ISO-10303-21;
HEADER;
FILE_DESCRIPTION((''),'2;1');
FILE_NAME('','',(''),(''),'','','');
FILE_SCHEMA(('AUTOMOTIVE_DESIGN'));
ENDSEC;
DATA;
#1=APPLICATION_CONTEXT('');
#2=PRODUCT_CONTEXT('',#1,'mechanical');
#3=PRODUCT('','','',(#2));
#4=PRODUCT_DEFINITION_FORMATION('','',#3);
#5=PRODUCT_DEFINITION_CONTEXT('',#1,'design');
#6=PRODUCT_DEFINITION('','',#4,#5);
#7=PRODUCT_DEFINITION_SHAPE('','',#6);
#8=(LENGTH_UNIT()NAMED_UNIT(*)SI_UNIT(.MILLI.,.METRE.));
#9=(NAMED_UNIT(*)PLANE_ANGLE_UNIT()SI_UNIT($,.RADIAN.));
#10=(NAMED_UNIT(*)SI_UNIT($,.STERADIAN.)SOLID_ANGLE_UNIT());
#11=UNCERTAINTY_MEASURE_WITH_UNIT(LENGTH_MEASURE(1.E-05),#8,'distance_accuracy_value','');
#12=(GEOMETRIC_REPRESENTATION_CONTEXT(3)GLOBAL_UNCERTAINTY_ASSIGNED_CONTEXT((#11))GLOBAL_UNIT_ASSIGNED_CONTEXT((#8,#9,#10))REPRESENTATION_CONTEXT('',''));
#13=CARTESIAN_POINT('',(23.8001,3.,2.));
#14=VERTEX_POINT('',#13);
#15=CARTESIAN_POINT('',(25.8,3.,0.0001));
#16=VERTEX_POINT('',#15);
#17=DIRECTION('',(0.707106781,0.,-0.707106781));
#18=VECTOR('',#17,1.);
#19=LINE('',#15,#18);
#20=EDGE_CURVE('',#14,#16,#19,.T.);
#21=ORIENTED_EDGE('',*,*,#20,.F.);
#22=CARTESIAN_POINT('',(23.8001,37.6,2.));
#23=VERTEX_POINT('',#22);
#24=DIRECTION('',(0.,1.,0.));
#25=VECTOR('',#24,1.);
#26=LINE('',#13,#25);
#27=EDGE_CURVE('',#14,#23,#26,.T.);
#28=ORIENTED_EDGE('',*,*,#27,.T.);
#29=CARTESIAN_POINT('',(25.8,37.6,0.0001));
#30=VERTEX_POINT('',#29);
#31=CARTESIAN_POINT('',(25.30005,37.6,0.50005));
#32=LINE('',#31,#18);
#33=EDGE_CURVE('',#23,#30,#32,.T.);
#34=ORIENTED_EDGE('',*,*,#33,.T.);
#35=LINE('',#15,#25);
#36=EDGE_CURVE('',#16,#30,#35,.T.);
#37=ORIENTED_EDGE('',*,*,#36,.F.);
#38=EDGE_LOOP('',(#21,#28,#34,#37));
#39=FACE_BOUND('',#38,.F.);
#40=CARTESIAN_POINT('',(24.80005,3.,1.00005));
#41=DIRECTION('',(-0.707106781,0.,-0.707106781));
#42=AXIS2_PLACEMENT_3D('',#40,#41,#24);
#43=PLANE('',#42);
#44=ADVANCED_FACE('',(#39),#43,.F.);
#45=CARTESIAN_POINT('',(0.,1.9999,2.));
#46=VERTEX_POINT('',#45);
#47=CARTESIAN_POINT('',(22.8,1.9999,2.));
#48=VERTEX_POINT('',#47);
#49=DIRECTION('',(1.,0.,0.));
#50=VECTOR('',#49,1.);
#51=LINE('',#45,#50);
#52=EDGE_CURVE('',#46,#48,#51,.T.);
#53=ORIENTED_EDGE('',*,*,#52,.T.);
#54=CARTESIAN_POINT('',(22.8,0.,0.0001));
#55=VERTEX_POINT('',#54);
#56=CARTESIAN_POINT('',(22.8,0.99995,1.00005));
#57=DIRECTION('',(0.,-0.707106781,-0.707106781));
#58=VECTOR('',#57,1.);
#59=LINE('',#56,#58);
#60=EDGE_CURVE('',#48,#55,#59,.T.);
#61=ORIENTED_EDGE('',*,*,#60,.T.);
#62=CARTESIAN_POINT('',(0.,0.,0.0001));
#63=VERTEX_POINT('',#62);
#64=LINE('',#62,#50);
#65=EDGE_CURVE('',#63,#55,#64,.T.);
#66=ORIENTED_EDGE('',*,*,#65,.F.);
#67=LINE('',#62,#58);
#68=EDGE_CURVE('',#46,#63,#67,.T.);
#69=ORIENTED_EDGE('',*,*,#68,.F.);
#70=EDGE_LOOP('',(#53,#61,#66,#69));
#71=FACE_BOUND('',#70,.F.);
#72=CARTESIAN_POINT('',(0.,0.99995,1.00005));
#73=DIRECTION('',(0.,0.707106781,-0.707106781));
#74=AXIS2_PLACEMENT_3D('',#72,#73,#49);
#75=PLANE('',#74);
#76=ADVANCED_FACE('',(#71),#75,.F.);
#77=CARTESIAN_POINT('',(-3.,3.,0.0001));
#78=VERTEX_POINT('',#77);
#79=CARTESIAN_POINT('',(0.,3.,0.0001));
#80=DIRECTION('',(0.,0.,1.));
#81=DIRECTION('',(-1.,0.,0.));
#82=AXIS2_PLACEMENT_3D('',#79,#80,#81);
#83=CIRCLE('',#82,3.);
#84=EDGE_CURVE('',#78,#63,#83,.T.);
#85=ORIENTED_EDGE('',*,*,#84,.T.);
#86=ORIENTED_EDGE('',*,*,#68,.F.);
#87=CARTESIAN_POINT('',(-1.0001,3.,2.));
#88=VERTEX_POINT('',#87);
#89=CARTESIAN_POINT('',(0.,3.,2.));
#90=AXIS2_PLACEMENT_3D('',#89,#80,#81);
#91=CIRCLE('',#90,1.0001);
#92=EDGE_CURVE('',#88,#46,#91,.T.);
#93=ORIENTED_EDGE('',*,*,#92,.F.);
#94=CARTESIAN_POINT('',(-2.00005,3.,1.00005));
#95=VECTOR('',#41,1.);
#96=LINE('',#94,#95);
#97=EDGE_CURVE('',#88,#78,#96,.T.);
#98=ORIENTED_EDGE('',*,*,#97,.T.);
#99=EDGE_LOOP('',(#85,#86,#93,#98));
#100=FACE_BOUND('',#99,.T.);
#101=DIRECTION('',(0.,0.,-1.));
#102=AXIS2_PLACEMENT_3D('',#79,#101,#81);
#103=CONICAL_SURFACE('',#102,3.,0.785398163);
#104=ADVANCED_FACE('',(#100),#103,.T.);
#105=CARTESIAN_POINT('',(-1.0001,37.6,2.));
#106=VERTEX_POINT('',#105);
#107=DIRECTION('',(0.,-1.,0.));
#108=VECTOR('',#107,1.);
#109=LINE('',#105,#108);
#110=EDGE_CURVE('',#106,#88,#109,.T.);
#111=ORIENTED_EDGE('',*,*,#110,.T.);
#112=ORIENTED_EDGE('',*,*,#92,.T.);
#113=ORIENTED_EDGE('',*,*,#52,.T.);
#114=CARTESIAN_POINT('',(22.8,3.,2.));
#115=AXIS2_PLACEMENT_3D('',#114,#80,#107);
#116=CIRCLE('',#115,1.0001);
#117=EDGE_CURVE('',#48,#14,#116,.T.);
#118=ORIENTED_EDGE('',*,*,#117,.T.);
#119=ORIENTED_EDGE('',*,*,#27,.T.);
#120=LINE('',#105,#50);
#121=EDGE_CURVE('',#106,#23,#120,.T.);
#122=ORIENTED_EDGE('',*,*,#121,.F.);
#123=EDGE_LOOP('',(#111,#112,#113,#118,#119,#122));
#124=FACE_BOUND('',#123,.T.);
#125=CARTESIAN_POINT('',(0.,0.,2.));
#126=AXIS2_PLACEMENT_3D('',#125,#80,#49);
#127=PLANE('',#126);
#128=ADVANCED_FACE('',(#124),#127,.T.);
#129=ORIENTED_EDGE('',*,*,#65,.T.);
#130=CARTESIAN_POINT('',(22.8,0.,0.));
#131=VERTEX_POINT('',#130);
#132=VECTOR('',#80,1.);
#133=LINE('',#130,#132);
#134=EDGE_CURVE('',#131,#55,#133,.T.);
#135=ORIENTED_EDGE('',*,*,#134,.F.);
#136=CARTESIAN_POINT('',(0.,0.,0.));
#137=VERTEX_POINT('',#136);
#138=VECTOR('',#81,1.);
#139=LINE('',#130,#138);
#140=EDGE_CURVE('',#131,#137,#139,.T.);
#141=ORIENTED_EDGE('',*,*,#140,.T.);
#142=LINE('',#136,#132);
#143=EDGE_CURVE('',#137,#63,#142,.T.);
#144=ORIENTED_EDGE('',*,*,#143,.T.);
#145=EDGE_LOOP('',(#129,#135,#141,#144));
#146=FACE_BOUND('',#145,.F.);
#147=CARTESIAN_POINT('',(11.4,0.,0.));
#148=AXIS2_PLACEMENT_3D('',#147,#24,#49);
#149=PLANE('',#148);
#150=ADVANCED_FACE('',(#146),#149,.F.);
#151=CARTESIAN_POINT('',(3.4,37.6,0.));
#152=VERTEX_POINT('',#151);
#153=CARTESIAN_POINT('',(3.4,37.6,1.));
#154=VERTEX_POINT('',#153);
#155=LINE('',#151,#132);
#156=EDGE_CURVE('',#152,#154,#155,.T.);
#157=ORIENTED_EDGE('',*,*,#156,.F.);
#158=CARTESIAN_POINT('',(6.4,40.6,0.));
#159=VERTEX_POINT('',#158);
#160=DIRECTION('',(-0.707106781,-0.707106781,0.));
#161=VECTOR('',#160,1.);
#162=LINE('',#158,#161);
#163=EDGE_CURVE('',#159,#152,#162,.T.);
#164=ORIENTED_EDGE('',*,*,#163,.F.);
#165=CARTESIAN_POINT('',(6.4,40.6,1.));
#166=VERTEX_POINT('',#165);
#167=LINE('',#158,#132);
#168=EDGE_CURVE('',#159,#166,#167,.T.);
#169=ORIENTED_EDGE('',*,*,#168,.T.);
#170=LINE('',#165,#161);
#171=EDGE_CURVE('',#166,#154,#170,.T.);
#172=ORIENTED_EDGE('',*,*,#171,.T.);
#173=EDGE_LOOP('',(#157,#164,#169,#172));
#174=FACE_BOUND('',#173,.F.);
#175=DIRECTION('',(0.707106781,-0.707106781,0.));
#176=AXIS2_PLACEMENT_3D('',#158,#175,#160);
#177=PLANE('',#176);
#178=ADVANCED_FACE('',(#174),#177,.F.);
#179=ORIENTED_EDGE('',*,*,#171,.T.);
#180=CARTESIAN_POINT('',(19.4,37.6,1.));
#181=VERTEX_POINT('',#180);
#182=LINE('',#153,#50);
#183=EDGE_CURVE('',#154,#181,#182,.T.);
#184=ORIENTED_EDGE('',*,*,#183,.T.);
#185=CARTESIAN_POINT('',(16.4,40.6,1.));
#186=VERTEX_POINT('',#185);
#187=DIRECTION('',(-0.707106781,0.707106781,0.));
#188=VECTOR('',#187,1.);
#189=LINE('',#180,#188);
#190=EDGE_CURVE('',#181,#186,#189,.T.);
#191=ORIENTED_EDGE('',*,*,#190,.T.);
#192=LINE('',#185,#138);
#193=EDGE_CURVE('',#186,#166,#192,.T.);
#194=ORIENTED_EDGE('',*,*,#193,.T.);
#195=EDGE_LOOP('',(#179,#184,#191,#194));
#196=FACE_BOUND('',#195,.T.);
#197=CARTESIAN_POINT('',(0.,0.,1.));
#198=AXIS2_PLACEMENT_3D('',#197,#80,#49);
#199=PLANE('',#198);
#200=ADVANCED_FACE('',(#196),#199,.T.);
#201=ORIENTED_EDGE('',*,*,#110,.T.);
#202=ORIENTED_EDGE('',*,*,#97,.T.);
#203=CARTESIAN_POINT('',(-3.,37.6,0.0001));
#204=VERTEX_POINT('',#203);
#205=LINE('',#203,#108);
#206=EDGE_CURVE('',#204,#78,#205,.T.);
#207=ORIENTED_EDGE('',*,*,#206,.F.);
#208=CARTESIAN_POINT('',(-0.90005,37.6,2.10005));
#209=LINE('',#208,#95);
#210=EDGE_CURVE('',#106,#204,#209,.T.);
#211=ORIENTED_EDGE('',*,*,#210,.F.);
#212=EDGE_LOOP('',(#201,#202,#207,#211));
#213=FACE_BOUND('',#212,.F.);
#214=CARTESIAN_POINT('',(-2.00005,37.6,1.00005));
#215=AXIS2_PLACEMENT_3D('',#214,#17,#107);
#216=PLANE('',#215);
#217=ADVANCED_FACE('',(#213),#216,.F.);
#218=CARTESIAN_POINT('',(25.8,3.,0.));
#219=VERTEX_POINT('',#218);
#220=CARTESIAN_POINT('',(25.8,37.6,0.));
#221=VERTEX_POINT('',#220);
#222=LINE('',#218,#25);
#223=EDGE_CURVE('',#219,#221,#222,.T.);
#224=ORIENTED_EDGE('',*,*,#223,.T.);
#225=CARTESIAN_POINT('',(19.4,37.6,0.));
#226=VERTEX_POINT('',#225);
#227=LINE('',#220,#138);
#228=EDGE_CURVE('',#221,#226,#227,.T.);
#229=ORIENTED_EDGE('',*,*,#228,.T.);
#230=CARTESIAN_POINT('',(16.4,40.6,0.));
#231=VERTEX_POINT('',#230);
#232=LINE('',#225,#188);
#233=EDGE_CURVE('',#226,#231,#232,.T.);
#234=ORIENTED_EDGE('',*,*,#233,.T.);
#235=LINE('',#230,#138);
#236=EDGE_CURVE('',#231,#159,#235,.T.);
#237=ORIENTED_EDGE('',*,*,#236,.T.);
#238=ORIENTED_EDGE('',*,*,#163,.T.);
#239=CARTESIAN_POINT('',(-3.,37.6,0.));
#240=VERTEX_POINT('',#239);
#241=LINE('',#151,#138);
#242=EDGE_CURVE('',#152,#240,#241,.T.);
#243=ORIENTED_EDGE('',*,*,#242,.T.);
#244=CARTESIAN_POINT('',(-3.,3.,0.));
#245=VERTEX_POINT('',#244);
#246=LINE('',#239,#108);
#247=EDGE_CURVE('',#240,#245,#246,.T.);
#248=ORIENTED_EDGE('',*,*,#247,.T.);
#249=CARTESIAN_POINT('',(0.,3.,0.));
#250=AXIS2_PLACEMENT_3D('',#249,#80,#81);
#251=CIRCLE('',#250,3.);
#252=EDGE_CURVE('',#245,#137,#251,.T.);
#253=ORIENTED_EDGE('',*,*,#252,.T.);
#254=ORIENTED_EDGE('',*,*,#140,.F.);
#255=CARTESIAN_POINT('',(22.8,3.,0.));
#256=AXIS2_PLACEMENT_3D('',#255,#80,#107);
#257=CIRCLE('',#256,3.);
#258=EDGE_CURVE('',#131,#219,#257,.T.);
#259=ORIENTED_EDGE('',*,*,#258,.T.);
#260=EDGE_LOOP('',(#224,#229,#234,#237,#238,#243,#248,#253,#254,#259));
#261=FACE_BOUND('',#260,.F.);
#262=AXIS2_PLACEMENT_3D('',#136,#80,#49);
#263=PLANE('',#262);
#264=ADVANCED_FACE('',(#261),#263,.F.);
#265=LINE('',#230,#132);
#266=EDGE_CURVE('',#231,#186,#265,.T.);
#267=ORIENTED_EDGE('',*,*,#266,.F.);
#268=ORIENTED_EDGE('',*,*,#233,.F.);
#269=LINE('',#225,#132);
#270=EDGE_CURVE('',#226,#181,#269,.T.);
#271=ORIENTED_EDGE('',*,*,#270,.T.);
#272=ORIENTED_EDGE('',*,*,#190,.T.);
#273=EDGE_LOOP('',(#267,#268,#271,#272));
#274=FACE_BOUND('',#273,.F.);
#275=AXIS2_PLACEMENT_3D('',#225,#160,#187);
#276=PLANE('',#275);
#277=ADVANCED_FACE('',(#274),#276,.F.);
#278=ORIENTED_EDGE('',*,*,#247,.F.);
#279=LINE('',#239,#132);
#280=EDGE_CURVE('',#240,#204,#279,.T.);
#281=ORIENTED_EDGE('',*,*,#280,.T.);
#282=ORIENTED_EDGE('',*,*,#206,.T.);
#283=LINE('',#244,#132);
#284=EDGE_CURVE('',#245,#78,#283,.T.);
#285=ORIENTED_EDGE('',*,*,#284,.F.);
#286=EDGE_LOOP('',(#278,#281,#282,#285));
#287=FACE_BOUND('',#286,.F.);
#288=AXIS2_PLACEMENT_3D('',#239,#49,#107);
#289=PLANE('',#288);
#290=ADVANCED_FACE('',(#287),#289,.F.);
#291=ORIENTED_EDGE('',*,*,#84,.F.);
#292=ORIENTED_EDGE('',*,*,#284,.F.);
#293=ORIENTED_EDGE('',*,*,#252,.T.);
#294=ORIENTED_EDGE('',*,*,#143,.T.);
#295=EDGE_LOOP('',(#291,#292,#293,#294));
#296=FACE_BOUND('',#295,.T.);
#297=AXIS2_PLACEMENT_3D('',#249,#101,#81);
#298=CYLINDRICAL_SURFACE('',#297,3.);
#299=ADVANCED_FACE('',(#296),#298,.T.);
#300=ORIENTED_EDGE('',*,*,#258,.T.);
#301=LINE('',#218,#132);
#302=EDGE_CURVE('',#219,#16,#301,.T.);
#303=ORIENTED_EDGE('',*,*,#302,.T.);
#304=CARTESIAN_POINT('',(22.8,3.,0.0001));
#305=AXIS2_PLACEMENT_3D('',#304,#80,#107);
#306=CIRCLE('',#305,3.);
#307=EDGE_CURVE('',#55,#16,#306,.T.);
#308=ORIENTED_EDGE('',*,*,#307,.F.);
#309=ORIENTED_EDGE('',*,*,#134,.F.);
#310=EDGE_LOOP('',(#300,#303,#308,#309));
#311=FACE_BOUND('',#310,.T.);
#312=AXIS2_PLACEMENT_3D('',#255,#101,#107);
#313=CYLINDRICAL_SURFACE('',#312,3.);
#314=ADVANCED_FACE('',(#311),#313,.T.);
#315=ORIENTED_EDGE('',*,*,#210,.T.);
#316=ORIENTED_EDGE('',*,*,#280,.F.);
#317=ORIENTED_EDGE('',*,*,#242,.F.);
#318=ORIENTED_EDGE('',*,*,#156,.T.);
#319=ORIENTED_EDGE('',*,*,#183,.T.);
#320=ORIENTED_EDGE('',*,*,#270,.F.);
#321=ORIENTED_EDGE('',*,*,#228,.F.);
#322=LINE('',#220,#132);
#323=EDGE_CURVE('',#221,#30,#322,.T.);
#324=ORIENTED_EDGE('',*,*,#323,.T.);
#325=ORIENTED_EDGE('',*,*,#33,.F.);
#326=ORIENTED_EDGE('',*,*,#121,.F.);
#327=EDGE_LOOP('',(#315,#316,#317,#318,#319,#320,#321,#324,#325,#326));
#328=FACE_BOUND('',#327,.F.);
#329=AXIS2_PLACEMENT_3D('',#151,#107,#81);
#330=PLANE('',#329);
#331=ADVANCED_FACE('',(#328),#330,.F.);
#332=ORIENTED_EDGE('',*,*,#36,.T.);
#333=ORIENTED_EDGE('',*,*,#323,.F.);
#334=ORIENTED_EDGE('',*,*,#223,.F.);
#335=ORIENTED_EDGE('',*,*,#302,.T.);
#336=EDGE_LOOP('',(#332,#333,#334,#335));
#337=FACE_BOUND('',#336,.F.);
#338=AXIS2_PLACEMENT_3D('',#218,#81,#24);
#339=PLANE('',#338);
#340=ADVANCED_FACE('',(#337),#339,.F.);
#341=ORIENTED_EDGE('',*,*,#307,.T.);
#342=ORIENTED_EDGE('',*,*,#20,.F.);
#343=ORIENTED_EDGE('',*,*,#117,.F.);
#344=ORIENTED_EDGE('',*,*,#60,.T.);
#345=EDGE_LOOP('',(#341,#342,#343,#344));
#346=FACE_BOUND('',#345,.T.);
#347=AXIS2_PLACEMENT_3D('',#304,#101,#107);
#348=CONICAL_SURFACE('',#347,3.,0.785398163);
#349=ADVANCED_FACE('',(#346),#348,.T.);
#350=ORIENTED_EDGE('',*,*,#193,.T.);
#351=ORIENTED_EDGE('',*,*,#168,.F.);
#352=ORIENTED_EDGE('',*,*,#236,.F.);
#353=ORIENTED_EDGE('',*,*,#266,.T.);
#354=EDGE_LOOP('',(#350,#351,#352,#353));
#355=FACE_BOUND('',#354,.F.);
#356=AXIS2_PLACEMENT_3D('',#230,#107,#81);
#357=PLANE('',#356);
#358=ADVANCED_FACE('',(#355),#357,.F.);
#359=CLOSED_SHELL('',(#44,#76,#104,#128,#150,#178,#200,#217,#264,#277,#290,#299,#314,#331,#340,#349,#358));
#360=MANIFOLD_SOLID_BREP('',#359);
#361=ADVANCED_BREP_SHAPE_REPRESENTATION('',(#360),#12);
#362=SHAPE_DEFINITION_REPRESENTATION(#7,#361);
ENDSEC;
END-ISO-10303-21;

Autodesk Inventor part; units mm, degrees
ref_plane "YZ Plane" through (0, 0, 0) normal (1, 0, 0) x (0, 1, 0)
ref_plane "XZ Plane" through (0, 0, 0) normal (0, 1, 0) x (-1, 0, 0)
ref_plane "XY Plane" through (0, 0, 0) normal (0, 0, 1) x (1, 0, 0)
sketch "Skizze1" plane through (0, 0, 0) normal (0, 0, 1) x (1, 0, 0)
  line L0 (3.4, 37.6) -> (-3, 37.6)
  line L1 (-3, 37.6) -> (-3, 3)
  arc A0 (-3, 3) -> (0, 0) centre (0, 3) ccw
  line L2 (0, 0) -> (22.8, 0)
  arc A1 (22.8, 0) -> (25.8, 3) centre (22.8, 3) ccw
  line L3 (25.8, 3) -> (25.8, 37.6)
  line L4 (25.8, 37.6) -> (19.4, 37.6)
  line L5 (19.4, 37.6) -> (16.4, 40.6)
  line L6 (16.4, 40.6) -> (6.4, 40.6)
  line L7 (6.4, 40.6) -> (3.4, 37.6)
  line L8 (-1.8, 35.6) -> (24.6, 35.6)
  line L9 (24.6, 35.6) -> (24.6, 9.2)
  line L10 (24.6, 9.2) -> (-1.8, 9.2)
  line L11 (-1.8, 9.2) -> (-1.8, 35.6)
  line L12 (24.6, 35.6) -> (-1.8, 35.6)
  line L13 (-1.8, 35.6) -> (-1.8, 9.2)
  line L14 (-1.8, 9.2) -> (24.6, 9.2)
  line L15 (24.6, 9.2) -> (24.6, 35.6)
  line L16 (24.6, 35.6) -> (-1.8, 35.6)
  line L17 (-3, 37.6) -> (3.4, 37.6)
  line L18 (-3, 3) -> (-3, 37.6)
  arc A2 (-3, 3) -> (0, 0) centre (0, 3) ccw
  line L19 (22.8, 0) -> (0, 0)
  arc A3 (22.8, 0) -> (25.8, 3) centre (22.8, 3) ccw
  line L20 (25.8, 37.6) -> (25.8, 3)
  line L21 (19.4, 37.6) -> (25.8, 37.6)
  line L22 (19.4, 37.6) -> (16.4, 40.6)
  line L23 (16.4, 40.6) -> (6.4, 40.6)
  line L24 (6.4, 40.6) -> (3.4, 37.6)
  circle A4 centre (4.1926, 4.6) radius 2
  line L25 (11.4, 35.6) -> (11.4, 0)
  circle A5 centre (18.6074, 4.6) radius 2
  point P0 (-3, 37.6)
  point P1 (-3, 3)
  point P2 (0, 0)
extrude "Extrusion1" add sketch "Skizze1" along normal blind 2 contours L7 L6 L5 L4 L3 A1 L2 A0 L1 L0 | L8 L25 L10 L11 | L8 L9 L10 L25 | A4 | A5
chamfer "Fase1" distance 2 angle 45 5 edges at (25.8, 20.3, 2) (24.9213, 0.8787, 2) (11.4, 0, 2) (-2.1213, 0.8787, 2) (-3, 20.3, 2)
sketch "Skizze2" plane through (0, 0, 2) normal (0, 0, 1) x (1, 0, 0)
  line L0 (-1, 3) -> (-1, 37.6) projected
  arc A0 (-1, 3) -> (0, 2) centre (0, 3) ccw projected
  line L1 (22.8, 2) -> (0, 2) projected
  arc A1 (22.8, 2) -> (23.8, 3) centre (22.8, 3) ccw projected
  line L2 (23.8, 37.6) -> (23.8, 3) projected
  line L3 (23.8, 37.6) -> (19.4, 37.6) projected
  line L4 (19.4, 37.6) -> (16.4, 40.6) projected
  line L5 (16.4, 40.6) -> (6.4, 40.6) projected
  line L6 (6.4, 40.6) -> (3.4, 37.6) projected
  line L7 (3.4, 37.6) -> (-1, 37.6) projected
  line L8 (6.4, 40.6) -> (3.4, 37.6) projected
  line L9 (3.4, 37.6) -> (19.4, 37.6)
  point P0 (0, 0)
extrude "Extrusion2" cut sketch "Skizze2" against normal blind 1 contours L6 L5 L4 L9
properties part number "gps-deckel"
